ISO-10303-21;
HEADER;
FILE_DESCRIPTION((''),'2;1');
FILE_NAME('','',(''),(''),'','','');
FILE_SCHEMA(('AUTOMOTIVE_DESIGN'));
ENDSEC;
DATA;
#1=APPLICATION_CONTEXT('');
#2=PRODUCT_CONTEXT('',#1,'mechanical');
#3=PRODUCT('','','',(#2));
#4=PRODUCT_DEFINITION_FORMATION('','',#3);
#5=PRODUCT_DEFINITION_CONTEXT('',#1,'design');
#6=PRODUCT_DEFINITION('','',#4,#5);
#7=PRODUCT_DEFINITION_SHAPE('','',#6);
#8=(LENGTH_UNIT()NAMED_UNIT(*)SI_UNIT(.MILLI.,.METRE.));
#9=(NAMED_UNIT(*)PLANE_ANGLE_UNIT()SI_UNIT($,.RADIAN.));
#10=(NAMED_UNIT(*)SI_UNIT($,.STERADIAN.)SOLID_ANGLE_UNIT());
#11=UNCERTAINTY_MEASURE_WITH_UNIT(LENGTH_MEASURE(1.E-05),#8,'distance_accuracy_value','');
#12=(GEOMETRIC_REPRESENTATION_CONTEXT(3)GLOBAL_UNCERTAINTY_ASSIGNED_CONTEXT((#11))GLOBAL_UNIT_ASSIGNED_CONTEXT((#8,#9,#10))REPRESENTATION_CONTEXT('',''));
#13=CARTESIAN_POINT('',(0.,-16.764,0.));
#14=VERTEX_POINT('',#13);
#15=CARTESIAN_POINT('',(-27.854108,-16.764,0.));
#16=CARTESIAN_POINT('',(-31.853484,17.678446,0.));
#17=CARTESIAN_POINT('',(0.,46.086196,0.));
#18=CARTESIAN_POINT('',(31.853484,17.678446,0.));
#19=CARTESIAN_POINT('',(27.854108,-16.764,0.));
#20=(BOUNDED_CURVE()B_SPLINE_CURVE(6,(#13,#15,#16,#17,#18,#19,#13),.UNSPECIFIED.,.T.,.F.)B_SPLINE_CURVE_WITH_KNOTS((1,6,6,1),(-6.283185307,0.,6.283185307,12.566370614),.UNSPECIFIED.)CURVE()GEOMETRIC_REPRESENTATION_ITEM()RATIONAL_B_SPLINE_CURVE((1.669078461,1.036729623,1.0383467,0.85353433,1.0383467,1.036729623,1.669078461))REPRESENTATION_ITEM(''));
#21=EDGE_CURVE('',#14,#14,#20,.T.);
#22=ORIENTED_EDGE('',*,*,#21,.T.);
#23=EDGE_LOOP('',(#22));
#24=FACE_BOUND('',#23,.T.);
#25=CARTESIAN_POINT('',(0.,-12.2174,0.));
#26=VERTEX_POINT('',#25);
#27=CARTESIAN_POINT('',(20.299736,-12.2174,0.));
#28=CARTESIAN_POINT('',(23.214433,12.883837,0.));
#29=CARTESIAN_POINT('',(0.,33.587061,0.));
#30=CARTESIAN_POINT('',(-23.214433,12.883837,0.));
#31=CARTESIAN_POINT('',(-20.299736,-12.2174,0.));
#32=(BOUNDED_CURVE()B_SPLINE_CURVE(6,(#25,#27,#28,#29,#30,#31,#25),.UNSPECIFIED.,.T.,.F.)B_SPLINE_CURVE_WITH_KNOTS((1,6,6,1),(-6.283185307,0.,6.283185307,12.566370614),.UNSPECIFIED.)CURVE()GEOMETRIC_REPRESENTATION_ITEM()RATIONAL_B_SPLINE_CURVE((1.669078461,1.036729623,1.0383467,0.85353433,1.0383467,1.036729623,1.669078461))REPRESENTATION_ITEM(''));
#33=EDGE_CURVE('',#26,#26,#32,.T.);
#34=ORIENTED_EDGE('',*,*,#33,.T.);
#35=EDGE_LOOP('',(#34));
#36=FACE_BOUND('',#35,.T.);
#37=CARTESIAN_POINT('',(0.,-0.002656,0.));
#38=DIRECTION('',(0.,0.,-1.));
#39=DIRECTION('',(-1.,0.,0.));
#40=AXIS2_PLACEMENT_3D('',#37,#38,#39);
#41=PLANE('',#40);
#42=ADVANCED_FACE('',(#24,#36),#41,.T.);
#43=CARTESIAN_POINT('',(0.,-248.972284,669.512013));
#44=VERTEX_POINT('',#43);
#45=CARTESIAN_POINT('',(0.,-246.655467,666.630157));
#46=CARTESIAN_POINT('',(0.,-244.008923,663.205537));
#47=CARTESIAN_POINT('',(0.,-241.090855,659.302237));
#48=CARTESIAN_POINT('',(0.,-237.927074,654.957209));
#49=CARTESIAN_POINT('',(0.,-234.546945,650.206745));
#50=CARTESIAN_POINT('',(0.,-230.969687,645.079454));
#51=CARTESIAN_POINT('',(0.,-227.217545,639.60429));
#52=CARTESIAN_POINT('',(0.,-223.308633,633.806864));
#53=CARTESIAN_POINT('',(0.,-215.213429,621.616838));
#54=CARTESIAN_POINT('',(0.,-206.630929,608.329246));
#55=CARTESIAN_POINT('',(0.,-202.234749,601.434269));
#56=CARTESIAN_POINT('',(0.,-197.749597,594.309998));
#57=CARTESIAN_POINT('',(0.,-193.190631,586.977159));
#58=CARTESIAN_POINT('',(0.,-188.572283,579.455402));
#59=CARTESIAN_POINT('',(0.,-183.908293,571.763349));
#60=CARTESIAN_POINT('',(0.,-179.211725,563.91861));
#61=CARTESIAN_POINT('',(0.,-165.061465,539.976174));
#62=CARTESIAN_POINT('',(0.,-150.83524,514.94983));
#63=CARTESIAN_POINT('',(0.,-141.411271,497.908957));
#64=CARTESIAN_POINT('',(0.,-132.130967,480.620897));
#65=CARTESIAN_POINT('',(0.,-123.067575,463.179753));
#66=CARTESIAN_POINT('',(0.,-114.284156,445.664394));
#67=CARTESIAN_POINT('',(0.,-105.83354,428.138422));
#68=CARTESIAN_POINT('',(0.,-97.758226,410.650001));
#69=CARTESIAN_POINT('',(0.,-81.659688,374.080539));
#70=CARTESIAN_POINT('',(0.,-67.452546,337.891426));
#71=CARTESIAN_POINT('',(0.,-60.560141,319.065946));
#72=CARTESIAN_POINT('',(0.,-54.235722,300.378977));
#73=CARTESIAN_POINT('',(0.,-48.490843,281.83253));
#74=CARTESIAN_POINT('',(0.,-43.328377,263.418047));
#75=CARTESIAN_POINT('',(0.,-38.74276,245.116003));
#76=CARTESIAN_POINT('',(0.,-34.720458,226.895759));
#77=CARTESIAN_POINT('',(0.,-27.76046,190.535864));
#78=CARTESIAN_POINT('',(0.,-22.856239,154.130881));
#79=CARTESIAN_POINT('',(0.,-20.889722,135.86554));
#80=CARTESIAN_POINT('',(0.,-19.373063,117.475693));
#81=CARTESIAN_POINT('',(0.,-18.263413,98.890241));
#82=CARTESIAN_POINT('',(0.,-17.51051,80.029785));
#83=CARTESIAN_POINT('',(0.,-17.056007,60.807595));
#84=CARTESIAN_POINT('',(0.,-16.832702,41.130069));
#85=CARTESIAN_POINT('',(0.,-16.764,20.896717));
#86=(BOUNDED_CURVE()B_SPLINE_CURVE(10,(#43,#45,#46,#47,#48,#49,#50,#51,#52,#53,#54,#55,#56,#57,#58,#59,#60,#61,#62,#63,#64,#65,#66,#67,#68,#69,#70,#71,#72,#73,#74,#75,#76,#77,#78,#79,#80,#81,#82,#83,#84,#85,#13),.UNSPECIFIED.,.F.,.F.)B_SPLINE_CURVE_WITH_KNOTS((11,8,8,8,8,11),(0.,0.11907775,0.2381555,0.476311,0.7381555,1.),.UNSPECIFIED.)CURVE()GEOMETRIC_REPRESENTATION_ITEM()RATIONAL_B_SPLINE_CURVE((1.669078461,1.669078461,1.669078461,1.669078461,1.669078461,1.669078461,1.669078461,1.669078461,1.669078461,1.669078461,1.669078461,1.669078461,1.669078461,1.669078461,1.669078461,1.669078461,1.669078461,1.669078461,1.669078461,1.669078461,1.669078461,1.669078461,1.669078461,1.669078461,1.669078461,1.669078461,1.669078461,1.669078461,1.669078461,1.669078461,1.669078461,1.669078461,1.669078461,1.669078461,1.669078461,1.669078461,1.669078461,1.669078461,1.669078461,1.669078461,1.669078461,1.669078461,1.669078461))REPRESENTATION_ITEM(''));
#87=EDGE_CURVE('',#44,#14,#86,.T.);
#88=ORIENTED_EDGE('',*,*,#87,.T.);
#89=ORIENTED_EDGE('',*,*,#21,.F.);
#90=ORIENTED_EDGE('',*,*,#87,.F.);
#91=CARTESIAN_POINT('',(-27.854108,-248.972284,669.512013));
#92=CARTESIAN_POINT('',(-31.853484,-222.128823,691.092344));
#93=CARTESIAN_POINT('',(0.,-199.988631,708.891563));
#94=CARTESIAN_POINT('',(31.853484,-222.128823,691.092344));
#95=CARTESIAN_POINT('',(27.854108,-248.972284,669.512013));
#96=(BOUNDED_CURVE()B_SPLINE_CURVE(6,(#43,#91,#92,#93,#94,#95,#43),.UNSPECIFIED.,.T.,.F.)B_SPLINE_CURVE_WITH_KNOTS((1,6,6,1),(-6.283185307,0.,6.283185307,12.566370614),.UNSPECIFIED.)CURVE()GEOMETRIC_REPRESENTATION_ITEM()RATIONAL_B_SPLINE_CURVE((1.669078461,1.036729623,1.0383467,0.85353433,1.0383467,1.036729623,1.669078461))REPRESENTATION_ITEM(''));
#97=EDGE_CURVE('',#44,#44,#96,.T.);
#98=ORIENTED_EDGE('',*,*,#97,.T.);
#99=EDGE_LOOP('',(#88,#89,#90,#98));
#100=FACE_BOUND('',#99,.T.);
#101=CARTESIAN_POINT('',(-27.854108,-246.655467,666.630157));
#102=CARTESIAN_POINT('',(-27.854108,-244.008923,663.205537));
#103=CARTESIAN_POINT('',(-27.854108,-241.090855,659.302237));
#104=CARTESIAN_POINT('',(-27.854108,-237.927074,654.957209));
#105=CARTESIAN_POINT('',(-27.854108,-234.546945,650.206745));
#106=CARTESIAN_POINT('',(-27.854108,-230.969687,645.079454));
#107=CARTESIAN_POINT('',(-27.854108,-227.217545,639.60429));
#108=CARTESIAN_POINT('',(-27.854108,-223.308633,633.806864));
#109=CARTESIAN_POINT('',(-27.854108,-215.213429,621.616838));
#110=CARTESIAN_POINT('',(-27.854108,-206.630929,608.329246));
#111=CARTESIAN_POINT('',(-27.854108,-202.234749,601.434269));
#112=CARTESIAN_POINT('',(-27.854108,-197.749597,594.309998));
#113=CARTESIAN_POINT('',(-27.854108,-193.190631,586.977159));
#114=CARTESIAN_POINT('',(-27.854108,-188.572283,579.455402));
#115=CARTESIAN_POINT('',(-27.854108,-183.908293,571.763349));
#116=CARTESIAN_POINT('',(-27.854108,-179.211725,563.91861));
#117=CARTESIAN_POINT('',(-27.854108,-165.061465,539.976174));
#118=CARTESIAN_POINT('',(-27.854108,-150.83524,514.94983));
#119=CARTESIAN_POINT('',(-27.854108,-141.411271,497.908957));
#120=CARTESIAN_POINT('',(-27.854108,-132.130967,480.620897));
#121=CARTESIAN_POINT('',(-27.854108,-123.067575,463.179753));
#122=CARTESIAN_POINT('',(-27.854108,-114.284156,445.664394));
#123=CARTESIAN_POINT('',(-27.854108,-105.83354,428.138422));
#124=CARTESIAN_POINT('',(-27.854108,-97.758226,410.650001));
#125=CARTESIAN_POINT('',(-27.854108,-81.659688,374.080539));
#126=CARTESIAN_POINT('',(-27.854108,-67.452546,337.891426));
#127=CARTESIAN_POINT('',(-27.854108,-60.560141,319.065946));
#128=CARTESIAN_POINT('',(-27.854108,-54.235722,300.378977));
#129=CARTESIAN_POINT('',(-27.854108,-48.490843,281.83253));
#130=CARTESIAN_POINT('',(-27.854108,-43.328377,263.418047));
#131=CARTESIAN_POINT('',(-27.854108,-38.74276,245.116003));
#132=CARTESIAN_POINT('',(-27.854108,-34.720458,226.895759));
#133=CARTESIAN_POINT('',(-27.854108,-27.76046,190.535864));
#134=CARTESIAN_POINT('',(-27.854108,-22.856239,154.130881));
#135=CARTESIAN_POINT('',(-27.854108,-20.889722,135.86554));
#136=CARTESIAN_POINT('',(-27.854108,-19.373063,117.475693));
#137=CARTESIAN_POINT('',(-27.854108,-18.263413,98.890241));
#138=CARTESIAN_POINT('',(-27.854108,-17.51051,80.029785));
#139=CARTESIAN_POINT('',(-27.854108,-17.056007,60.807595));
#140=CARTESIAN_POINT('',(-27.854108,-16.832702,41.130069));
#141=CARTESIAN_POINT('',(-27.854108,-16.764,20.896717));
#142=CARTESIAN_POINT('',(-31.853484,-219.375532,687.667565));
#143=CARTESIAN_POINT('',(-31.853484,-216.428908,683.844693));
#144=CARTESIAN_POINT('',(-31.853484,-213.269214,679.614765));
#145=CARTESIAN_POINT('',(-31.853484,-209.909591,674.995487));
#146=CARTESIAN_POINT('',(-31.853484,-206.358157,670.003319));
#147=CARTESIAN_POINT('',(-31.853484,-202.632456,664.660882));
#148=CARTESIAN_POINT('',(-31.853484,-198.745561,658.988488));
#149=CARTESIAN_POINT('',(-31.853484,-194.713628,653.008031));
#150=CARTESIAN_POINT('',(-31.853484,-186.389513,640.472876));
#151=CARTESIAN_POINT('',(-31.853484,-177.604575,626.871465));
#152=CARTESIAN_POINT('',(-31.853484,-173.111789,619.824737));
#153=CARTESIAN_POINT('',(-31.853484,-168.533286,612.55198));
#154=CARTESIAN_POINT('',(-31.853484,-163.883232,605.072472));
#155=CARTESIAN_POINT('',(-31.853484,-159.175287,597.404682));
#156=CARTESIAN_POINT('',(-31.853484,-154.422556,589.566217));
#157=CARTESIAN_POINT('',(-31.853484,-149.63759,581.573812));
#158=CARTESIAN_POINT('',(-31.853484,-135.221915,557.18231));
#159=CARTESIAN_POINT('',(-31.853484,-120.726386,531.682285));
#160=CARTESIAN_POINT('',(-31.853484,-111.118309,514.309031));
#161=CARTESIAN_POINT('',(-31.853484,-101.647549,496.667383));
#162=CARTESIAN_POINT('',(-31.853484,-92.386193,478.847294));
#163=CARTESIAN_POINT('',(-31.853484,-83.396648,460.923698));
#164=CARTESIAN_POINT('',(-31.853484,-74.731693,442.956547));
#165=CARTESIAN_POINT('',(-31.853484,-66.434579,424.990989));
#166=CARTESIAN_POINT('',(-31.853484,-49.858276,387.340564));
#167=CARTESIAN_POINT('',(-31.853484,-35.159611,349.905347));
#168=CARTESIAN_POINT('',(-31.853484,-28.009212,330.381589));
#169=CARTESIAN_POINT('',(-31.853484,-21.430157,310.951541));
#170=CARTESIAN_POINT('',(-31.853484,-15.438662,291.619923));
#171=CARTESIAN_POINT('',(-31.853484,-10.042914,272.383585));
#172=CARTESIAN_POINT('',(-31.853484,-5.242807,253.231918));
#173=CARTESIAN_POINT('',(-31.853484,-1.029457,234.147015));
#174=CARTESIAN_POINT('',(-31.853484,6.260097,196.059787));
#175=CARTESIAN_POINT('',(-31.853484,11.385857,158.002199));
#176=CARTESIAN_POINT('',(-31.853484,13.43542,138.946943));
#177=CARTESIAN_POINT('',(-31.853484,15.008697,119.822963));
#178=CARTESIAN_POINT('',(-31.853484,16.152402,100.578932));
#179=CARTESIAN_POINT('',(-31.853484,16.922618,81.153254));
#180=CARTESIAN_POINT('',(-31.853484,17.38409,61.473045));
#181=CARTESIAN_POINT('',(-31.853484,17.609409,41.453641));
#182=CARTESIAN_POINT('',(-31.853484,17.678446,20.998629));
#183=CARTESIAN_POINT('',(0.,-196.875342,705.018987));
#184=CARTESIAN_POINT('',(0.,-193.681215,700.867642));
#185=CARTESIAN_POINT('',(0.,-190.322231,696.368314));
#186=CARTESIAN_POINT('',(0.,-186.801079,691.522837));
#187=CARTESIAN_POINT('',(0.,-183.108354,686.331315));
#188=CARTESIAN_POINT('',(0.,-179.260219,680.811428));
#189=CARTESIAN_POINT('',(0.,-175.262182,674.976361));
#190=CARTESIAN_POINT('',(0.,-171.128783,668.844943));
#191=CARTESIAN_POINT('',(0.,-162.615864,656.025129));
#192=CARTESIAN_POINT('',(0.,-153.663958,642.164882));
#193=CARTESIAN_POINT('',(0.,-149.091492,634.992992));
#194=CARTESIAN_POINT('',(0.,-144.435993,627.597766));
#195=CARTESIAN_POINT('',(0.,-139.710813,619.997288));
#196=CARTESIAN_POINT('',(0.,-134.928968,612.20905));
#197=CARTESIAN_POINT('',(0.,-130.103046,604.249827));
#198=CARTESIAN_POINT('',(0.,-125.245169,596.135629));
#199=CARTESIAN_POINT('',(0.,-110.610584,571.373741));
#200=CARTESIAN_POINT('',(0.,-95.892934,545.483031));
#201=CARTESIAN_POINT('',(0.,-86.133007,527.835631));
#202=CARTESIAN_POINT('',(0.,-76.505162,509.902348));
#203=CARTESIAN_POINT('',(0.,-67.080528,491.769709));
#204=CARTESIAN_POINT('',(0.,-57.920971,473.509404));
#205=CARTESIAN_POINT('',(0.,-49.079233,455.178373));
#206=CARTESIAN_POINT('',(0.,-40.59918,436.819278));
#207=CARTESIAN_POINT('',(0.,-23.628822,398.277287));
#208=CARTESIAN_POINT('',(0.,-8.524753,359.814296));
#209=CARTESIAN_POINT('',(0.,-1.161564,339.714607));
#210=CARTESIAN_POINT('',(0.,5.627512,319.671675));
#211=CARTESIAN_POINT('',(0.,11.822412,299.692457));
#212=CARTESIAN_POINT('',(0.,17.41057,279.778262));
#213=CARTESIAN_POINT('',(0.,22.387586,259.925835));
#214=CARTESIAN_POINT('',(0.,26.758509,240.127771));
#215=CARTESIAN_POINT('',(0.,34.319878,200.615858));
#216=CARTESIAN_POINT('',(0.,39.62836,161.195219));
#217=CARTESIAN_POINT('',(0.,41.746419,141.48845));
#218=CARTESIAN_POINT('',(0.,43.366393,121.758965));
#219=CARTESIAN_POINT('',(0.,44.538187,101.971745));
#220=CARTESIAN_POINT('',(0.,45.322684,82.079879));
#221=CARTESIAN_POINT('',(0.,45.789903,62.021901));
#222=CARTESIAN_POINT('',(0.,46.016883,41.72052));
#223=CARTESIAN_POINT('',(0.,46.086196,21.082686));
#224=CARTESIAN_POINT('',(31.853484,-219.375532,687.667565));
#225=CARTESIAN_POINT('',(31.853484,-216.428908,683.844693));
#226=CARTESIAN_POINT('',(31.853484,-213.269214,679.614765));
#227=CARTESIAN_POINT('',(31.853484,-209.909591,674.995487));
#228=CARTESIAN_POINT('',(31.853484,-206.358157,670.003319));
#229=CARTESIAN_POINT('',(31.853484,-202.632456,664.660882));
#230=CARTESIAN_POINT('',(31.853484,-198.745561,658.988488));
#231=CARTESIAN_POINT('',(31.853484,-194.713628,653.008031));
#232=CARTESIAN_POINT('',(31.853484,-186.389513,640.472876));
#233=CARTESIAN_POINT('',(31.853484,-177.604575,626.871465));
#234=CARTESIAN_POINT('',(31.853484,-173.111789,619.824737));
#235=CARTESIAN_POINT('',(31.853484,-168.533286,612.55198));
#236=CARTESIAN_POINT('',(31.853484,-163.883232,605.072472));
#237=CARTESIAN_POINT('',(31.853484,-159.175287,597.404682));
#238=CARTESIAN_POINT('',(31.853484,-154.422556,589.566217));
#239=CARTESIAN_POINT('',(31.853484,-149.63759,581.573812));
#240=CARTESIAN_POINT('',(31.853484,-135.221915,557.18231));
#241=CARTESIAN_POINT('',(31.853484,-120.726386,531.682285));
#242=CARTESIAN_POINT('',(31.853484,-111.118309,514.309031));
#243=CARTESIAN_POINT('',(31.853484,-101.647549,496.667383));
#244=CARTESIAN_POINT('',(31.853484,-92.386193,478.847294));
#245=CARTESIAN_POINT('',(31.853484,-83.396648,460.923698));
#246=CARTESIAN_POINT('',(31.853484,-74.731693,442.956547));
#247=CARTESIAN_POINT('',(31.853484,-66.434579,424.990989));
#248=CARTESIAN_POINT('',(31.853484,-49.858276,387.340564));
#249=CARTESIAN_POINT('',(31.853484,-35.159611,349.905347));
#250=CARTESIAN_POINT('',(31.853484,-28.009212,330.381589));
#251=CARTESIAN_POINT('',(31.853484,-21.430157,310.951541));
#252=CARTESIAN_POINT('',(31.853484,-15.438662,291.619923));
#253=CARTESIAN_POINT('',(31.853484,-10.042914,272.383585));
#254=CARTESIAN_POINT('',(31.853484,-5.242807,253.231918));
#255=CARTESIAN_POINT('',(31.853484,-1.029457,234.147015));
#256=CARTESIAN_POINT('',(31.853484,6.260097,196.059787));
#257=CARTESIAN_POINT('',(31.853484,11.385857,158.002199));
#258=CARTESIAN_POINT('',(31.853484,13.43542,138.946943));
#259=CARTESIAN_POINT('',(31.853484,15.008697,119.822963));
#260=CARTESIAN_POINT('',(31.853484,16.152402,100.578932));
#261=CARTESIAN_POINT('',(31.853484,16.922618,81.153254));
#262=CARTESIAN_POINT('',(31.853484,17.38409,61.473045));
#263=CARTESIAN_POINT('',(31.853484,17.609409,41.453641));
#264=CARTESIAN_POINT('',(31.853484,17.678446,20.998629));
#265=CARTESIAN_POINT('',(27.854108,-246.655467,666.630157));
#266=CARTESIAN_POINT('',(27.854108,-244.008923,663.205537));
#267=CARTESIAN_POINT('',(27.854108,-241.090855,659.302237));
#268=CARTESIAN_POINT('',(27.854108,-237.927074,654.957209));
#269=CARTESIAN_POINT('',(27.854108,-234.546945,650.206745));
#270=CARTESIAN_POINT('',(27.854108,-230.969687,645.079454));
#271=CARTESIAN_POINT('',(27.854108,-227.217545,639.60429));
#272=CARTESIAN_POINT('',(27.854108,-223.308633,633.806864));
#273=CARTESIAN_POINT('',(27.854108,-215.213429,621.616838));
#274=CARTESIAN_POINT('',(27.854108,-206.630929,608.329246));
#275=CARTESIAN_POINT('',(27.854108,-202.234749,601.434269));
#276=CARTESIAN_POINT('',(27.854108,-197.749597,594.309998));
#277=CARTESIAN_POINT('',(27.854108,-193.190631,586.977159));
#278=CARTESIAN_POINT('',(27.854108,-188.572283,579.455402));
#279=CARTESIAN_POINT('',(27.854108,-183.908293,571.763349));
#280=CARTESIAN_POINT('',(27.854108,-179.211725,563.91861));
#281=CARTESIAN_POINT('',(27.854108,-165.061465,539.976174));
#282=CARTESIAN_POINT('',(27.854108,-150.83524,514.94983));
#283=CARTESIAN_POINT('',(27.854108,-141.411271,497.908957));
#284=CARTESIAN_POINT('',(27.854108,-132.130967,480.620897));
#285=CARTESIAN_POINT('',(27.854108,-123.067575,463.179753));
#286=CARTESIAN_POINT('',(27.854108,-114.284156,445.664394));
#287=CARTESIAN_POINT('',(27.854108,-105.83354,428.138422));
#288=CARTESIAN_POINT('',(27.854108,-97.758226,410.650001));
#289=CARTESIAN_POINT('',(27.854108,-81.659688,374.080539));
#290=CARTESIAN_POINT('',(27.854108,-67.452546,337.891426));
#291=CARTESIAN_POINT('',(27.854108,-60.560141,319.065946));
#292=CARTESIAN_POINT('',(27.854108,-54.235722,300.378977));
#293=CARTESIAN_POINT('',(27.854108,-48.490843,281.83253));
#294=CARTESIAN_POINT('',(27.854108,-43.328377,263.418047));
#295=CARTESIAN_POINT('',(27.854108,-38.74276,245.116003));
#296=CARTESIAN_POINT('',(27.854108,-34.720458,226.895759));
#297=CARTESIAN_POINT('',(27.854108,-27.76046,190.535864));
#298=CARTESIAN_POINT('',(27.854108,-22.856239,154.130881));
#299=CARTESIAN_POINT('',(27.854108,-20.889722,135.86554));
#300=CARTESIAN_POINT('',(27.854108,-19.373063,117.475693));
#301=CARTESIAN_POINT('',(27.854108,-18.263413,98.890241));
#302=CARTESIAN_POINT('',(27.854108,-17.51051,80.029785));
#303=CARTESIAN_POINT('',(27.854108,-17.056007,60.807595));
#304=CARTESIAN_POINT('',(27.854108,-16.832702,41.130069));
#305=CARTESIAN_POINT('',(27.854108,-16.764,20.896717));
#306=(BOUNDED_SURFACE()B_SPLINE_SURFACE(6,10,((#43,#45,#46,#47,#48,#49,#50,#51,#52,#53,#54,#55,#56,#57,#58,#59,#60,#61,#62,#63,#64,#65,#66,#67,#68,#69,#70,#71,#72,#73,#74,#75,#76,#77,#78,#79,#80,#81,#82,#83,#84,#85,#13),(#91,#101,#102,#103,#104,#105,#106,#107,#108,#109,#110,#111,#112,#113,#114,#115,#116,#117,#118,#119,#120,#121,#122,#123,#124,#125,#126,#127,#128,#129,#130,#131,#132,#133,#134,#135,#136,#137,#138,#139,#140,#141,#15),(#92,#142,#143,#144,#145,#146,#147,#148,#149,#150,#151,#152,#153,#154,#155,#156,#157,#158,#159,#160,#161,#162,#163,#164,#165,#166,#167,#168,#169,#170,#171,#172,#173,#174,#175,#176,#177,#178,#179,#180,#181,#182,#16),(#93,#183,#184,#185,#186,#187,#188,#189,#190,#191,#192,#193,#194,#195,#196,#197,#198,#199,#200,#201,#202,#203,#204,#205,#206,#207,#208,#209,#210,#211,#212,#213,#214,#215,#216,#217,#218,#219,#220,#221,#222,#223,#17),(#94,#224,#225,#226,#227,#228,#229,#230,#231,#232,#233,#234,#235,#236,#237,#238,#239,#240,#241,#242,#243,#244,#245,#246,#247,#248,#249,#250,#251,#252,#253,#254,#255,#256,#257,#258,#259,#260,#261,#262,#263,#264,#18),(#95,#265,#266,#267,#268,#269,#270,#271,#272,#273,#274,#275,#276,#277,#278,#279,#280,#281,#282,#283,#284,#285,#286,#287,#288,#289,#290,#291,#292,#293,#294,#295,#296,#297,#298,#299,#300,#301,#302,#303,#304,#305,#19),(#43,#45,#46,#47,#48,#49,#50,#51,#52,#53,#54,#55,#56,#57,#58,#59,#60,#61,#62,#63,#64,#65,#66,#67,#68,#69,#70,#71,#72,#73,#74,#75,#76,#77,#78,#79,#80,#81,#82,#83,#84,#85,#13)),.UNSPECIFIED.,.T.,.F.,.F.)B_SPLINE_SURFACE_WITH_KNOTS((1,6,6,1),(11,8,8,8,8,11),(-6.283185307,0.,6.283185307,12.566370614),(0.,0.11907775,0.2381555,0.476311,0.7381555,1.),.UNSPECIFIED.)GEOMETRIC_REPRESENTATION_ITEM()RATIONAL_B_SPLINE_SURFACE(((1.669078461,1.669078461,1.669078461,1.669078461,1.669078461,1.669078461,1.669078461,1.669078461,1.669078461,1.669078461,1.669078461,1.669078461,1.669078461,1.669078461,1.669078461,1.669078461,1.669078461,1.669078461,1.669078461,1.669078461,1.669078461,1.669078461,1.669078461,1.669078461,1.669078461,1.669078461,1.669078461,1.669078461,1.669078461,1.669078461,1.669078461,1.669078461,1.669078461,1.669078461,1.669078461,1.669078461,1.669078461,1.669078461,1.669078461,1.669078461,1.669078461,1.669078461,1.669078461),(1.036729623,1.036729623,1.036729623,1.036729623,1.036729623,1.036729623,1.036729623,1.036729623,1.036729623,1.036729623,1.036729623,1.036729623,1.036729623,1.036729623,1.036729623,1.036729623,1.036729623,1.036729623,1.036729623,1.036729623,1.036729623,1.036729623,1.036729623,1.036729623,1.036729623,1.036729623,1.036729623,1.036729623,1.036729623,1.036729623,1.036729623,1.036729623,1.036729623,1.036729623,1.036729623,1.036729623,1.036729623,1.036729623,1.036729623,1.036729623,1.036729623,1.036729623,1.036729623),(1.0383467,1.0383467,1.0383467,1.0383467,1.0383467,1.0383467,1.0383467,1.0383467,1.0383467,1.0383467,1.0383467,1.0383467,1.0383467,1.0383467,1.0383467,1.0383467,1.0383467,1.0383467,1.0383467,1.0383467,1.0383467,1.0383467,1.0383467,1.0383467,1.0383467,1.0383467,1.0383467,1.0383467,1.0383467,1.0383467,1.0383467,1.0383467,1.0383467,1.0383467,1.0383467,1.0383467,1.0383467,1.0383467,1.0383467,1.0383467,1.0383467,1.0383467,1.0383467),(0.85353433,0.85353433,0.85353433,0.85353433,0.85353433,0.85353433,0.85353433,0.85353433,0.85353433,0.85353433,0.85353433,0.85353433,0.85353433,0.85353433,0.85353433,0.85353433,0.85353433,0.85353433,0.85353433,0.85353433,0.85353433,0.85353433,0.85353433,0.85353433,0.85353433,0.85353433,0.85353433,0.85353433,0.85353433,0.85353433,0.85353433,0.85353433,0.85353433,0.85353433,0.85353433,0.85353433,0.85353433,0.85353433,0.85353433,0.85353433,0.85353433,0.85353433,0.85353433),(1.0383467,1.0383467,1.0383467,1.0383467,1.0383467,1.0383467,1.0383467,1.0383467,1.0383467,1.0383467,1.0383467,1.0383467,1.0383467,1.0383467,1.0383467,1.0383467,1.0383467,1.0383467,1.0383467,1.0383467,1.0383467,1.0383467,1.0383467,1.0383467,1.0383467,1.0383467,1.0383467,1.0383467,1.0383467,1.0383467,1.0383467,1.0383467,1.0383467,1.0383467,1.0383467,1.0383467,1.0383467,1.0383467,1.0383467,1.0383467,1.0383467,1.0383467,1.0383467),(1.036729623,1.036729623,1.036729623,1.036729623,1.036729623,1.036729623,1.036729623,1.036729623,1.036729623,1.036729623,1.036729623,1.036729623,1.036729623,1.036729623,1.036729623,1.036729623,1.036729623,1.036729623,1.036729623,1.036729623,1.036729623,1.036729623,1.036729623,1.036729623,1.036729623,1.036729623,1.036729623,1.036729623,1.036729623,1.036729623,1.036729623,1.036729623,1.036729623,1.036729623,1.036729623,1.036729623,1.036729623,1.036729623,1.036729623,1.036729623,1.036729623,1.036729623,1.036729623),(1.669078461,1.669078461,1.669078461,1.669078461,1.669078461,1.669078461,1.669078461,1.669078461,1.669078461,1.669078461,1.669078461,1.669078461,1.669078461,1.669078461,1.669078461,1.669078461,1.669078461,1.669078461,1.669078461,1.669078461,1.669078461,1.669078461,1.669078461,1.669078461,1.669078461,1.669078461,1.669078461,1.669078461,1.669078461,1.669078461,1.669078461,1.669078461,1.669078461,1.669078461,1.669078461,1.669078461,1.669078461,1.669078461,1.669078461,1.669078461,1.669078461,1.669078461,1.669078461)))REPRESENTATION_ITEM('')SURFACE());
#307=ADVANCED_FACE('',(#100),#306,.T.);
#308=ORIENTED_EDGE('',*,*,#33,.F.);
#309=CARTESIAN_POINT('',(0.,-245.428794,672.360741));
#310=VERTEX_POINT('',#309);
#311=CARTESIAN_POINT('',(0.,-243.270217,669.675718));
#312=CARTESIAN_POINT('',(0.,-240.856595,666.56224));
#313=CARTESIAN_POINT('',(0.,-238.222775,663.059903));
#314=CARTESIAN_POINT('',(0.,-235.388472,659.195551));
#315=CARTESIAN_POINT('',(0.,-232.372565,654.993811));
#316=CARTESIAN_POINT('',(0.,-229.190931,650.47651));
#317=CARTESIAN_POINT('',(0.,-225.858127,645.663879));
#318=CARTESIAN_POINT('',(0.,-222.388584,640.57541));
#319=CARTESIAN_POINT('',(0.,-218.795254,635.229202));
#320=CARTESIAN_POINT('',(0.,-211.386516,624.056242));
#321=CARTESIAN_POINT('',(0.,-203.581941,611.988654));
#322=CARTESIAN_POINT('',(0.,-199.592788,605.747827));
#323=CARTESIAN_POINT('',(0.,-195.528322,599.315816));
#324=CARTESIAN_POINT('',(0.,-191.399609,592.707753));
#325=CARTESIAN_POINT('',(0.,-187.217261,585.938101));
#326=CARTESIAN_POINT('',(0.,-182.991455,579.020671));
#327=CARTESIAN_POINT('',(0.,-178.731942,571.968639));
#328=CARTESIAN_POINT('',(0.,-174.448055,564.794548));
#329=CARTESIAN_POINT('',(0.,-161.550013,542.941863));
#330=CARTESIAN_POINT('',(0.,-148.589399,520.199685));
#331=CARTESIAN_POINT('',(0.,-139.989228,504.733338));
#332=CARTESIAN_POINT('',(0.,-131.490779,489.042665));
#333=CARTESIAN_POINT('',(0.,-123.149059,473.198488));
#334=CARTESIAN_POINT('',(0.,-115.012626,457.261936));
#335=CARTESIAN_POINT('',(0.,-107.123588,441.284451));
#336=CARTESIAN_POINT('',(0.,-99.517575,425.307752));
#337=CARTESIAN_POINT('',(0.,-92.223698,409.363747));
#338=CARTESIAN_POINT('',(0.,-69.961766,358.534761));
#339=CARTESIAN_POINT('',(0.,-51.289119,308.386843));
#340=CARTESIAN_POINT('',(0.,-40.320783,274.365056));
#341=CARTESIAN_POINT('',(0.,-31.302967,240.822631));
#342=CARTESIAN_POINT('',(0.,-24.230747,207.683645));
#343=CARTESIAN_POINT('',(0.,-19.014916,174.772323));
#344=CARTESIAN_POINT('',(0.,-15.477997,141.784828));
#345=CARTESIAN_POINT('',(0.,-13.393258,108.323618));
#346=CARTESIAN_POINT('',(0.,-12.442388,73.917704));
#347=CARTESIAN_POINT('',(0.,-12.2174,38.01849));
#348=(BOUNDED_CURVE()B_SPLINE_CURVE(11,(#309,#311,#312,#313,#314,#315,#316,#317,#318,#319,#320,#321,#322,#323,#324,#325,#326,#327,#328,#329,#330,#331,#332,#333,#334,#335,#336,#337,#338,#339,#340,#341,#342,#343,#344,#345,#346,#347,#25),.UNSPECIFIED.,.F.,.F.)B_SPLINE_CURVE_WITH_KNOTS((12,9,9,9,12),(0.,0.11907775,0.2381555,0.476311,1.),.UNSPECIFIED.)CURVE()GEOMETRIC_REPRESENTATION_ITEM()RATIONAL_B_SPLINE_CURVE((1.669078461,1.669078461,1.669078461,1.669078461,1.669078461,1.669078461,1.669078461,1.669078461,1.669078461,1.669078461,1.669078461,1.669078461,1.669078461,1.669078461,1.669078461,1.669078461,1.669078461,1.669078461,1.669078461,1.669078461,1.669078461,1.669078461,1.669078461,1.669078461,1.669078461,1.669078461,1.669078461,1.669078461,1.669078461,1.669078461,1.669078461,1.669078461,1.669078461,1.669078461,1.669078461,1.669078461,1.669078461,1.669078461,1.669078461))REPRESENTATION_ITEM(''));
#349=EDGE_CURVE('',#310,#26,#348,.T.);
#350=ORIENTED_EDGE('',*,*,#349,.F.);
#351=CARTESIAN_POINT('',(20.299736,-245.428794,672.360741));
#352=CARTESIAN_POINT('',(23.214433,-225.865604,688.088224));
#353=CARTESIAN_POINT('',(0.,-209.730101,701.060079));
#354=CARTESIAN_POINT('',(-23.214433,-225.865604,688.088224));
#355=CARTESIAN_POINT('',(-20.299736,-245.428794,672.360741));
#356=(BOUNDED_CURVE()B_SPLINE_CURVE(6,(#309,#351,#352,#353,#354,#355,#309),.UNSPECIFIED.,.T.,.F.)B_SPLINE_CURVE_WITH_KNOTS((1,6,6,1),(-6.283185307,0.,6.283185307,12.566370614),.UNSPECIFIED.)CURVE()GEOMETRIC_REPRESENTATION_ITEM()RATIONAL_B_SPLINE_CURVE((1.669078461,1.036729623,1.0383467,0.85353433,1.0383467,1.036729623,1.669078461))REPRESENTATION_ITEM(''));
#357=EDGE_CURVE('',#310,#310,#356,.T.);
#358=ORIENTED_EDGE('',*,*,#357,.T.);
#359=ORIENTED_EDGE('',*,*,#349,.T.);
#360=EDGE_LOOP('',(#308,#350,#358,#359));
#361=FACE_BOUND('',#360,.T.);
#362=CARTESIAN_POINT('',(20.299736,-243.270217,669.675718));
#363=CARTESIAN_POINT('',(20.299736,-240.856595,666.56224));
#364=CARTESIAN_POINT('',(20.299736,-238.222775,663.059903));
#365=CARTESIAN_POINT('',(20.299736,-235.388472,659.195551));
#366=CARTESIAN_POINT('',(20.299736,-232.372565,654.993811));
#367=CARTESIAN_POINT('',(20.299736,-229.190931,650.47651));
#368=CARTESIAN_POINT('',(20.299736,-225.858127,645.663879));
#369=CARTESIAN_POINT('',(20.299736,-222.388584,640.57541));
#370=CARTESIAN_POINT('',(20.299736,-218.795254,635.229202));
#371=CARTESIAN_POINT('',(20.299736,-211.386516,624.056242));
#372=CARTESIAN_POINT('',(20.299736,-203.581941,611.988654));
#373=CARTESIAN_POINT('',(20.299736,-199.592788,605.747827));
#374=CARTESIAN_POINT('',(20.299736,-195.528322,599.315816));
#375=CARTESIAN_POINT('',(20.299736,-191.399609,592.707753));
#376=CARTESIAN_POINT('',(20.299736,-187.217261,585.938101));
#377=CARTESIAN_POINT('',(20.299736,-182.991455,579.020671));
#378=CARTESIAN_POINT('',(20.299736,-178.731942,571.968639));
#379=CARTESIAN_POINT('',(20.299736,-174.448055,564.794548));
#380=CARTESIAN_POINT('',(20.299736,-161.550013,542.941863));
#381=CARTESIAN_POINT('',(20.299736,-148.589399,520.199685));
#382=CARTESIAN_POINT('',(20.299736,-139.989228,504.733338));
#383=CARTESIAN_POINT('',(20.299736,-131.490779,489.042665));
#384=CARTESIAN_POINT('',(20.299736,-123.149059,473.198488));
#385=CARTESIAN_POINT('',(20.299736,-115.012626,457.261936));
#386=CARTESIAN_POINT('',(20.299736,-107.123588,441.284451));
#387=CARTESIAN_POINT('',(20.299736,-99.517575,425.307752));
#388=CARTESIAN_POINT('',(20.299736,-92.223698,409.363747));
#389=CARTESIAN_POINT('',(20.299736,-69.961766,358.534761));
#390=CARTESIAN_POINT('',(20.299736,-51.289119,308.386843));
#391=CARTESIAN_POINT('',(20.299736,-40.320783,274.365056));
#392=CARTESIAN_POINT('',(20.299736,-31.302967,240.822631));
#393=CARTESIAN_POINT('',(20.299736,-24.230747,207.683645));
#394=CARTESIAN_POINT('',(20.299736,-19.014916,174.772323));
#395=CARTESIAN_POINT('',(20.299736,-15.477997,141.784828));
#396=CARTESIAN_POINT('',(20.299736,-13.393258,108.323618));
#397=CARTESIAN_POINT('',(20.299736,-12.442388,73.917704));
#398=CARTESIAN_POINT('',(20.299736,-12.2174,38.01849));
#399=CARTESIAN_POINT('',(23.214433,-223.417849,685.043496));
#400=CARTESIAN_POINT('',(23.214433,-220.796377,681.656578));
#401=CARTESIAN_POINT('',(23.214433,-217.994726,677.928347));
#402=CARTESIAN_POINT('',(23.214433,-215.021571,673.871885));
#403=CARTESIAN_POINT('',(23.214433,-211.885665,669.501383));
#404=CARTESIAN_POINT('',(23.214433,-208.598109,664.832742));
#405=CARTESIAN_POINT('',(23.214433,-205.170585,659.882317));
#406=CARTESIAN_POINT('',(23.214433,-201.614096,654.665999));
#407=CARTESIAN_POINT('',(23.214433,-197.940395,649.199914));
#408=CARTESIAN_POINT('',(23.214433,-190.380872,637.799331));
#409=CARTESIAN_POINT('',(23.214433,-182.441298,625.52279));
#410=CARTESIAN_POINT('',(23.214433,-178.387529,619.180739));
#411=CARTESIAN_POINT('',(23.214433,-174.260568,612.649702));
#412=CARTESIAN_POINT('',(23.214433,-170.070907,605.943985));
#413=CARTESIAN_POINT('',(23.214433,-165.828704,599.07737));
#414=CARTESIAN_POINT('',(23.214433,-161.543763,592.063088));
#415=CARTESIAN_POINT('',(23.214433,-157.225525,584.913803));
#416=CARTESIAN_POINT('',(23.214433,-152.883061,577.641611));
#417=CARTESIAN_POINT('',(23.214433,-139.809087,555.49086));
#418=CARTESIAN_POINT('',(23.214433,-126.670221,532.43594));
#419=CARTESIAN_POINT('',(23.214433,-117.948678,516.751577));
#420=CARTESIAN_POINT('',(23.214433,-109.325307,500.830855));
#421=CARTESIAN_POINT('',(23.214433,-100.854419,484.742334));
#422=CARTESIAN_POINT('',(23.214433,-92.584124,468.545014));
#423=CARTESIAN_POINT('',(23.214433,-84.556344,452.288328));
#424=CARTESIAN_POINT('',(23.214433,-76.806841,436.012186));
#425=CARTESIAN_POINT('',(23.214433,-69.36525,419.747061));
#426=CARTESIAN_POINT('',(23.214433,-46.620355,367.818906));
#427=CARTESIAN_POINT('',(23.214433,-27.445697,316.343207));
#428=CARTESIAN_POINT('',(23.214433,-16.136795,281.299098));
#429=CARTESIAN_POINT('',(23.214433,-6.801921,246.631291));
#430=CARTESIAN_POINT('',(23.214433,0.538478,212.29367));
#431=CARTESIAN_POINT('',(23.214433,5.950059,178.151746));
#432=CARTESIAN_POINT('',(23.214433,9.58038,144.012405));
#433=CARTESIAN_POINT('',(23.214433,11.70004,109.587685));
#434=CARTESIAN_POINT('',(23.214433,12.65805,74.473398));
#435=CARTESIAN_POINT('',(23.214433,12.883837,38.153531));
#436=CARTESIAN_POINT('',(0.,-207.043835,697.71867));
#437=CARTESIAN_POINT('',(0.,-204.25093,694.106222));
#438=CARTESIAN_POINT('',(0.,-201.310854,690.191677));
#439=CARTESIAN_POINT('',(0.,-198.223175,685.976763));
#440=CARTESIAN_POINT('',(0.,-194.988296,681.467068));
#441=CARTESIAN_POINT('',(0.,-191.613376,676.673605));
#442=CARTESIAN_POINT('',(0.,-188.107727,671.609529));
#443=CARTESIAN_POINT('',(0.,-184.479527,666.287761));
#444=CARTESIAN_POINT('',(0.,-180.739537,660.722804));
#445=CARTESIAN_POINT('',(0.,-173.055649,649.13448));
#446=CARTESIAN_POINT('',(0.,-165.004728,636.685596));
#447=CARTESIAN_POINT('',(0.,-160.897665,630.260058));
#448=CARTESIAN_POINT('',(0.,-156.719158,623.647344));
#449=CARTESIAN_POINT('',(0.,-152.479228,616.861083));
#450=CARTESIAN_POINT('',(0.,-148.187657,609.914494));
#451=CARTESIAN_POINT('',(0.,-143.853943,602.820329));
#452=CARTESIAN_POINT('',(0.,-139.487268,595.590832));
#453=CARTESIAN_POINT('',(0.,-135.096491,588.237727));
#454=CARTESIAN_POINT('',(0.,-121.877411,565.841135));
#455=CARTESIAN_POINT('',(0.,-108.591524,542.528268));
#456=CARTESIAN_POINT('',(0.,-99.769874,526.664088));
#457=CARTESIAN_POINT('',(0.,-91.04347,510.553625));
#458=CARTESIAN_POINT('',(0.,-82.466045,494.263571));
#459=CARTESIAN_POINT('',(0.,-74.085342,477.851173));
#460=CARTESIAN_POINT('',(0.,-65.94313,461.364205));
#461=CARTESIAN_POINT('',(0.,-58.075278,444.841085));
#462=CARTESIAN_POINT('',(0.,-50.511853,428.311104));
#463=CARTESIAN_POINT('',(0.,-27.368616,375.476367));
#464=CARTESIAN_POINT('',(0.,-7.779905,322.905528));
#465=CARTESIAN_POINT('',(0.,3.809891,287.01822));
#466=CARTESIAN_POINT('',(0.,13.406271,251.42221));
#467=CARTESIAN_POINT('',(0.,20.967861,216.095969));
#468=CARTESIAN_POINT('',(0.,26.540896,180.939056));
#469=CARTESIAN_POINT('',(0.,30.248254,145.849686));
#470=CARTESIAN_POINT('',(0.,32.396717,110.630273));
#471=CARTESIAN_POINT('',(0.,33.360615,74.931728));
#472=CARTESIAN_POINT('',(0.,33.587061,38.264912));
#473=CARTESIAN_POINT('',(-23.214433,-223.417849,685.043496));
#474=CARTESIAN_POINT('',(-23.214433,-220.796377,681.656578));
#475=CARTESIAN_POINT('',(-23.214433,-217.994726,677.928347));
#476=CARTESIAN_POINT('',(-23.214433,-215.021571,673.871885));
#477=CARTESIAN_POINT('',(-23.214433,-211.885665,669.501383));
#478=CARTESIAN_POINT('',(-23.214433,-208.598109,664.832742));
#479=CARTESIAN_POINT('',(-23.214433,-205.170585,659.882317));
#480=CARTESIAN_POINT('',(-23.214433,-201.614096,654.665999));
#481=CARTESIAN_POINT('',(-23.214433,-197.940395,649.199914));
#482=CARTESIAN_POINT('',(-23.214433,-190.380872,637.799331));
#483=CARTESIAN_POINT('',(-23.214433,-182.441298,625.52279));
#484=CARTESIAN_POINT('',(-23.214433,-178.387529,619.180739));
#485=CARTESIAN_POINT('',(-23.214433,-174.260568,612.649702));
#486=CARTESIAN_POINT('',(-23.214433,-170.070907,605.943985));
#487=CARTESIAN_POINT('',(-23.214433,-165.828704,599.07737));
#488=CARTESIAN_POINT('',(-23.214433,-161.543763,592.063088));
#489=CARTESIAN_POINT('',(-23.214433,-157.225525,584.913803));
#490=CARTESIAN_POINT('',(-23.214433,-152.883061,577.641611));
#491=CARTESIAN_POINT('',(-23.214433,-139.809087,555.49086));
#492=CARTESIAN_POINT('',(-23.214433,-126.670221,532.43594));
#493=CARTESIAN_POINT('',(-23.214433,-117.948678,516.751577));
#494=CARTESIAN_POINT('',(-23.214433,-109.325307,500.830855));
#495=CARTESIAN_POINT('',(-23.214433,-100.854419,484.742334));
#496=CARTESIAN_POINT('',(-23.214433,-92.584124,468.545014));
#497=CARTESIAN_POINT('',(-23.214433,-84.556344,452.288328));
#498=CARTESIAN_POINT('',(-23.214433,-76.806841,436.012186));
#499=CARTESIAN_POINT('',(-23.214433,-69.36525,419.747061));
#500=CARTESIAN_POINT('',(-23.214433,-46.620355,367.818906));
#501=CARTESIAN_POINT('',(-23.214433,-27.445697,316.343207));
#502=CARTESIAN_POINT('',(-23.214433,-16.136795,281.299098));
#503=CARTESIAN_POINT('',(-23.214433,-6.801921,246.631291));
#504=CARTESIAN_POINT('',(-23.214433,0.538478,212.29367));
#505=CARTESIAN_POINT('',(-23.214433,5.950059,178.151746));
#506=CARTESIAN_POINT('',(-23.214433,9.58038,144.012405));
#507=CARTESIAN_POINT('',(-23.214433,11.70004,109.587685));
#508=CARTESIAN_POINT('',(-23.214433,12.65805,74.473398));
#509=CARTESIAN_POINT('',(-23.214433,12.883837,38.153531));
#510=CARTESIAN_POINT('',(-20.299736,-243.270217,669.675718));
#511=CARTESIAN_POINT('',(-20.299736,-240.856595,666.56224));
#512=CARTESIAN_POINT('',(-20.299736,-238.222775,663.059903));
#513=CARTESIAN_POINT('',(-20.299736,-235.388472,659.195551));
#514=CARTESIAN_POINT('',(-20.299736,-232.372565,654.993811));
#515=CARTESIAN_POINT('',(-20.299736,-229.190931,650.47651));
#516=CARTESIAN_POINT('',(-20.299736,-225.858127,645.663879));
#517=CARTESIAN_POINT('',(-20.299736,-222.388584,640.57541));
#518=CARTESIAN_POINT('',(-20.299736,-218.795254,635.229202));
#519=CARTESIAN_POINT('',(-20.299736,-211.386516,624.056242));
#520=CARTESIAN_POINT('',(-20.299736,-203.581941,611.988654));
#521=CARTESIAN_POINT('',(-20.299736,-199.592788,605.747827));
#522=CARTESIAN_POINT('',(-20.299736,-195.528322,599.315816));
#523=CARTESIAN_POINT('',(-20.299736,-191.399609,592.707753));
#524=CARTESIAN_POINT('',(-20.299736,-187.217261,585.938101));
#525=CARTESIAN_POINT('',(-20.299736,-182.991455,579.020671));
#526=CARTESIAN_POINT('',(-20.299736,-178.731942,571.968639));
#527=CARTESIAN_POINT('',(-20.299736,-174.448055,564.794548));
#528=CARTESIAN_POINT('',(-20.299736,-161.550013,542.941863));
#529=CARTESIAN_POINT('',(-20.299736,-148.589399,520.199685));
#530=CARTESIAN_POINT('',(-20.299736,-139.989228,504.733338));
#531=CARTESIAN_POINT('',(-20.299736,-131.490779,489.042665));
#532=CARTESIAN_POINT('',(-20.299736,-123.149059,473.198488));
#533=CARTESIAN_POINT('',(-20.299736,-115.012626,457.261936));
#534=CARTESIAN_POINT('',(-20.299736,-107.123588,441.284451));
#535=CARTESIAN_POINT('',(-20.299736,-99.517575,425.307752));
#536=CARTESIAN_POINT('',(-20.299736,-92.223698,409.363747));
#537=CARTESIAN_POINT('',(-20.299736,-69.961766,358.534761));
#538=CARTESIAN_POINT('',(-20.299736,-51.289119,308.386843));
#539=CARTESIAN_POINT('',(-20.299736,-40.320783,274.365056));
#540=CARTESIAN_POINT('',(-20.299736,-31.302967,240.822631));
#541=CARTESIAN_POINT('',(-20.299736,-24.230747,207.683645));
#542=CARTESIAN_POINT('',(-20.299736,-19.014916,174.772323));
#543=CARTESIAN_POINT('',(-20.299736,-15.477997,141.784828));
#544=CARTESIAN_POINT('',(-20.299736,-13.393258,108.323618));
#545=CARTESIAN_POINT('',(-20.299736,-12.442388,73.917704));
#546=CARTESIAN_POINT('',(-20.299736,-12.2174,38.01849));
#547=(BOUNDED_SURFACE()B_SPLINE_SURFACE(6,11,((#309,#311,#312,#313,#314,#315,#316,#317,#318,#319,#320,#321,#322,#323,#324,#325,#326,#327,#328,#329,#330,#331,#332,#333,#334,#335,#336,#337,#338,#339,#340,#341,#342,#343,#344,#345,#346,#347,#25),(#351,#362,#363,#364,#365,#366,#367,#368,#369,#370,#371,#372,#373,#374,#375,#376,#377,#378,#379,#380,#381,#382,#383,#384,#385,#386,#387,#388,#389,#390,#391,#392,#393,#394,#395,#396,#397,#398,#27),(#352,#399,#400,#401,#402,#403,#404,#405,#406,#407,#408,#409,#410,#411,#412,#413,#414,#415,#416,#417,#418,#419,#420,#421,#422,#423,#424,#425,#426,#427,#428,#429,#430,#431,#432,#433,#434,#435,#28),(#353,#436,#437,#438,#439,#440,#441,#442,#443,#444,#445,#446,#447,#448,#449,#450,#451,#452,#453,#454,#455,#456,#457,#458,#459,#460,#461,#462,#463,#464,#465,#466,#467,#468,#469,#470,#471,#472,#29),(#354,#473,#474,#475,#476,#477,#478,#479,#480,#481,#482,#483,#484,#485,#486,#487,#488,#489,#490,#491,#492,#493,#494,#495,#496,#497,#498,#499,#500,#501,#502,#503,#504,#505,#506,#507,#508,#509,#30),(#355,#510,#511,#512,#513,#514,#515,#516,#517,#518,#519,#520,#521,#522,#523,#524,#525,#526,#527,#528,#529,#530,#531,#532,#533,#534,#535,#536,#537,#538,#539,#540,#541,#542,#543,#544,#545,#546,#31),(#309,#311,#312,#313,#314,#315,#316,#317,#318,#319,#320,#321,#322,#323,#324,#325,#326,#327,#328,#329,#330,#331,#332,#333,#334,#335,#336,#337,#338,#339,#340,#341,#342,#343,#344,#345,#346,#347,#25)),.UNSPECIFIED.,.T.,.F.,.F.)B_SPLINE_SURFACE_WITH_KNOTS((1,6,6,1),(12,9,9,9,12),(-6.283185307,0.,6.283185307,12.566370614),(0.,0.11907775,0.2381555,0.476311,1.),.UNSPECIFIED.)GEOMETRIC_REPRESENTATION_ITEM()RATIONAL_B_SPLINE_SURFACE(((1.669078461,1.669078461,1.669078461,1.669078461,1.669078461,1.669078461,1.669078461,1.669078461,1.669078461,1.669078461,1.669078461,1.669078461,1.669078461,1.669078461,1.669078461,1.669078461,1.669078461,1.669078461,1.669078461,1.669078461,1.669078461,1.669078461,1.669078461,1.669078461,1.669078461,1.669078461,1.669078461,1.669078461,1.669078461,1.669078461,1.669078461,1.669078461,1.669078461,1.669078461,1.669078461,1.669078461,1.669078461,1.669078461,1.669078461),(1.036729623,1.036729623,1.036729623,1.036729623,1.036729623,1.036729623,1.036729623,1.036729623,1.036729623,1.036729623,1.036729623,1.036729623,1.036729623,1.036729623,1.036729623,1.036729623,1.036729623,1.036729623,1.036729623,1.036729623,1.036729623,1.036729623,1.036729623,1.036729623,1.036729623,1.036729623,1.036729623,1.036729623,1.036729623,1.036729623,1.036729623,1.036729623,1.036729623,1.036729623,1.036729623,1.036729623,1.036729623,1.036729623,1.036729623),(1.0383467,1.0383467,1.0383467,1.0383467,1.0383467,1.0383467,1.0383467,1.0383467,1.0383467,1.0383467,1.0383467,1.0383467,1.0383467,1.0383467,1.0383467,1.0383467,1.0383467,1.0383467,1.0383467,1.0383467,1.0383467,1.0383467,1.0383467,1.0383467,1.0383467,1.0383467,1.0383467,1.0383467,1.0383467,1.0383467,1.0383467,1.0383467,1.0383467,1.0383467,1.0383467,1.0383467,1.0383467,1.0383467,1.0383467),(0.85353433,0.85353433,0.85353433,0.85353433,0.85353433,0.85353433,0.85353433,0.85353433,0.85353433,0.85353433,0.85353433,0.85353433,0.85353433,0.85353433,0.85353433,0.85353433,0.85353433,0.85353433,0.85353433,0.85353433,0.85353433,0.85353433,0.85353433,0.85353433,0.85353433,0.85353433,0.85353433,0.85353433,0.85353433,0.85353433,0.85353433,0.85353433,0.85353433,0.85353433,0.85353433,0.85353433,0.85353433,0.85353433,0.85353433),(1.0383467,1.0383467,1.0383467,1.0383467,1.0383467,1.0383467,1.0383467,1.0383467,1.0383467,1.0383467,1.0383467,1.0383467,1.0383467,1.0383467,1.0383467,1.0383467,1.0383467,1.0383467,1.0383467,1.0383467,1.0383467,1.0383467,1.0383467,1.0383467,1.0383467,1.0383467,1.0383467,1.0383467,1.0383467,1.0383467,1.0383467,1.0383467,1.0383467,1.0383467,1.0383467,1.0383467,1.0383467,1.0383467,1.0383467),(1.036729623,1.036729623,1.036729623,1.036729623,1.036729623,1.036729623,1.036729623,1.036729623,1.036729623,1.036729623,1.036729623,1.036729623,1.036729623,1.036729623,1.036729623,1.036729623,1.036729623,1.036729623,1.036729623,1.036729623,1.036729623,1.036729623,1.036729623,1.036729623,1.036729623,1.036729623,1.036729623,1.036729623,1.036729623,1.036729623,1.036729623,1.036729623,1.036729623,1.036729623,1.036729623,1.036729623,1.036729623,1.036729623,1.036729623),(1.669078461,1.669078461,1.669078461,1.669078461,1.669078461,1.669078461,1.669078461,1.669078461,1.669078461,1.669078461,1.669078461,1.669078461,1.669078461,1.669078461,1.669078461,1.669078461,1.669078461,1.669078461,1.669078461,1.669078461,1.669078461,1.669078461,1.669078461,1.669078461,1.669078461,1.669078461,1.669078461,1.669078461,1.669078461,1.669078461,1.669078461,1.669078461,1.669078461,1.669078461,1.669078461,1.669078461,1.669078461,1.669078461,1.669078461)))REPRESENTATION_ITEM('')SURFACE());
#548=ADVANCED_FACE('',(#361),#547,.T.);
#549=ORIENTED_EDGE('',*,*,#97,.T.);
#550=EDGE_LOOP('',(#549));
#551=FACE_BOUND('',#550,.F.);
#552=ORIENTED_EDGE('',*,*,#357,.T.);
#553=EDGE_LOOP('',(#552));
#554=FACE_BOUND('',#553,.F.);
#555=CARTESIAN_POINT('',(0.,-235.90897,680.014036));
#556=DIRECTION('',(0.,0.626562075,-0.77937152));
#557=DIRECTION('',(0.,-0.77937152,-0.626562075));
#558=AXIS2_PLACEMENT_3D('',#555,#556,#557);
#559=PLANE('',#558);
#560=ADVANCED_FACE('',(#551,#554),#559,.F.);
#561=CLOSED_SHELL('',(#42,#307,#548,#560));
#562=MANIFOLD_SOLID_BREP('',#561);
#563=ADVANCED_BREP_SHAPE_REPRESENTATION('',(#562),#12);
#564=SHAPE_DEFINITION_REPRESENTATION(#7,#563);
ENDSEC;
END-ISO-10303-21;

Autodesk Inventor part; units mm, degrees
ref_plane "Plano inicial" through (0, 0, 0) normal (0, 0, 1) x (1, 0, 0)
ref_plane "Plano final" through (0, 0, 734.2096) normal (0, 0, 1) x (1, 0, 0)
sketch "Boceto" plane through (0, 0, 0) normal (0, 0, -1) x (0, -1, 0)
  circle A0 centre (0, 0) radius 12.2174
  circle A1 centre (0, 0) radius 16.764
  dimension "d0" = 33.528
  dimension "d1" = 4.5466
sketch "Sketch3" plane through (0, 0, 0) normal (0, 0, 1) x (1, 0, 0)
  line L0 (0, 0) -> (10, 0)
ref_plane "Work Plane3" through (0, 0, 0) normal (0, -1, 0) x (1, 0, 0)
sketch "Sketch4" plane through (0, 0, 0) normal (0, -1, 0) x (1, 0, 0)
  line L0 (-2, 0) -> (12, 0)
  line L1 (-2, 734.2096) -> (12, 734.2096)
  dimension "d7" = 734.2096
ref_plane "Plano de trabajo de orientación" through (0, 0, 0) normal (0, 0, -1) x (0, -1, 0)
sketch3d "Trayectoria de barrido"
  spline S0 degree 4 poles (0, -235.9069, 680.0157) (0, -210.6143, 648.5546) (0, -91.1684, 463.5011) (0, -3.945, 270.0572) (0, 0, 104.7316) (0, 0, 0) knots 0 0 0 0 0 0.476311 1 1 1 1 1 weights 1 1 1 1 1 1
sweep "Cuerpo" add profiles "Boceto" path "Trayectoria de barrido"
equation "\"d0\" = G_H"
equation "\"d1\" = G_T"
equation "\"G_H\" = 33.528"
equation "\"G_T\" = 4.5466"
equation "\"G_L\" = d7"
equation "\"G_OFFSET_START\" = 0"
equation "\"G_OFFSET_END\" = 0"
equation "\"d5\" = G_OFFSET_END + B_L"
equation "\"B_L\" = 734.20959"
properties part number "ANSI - 1 x 0.179 - 28,906" material "Acero, suave"
